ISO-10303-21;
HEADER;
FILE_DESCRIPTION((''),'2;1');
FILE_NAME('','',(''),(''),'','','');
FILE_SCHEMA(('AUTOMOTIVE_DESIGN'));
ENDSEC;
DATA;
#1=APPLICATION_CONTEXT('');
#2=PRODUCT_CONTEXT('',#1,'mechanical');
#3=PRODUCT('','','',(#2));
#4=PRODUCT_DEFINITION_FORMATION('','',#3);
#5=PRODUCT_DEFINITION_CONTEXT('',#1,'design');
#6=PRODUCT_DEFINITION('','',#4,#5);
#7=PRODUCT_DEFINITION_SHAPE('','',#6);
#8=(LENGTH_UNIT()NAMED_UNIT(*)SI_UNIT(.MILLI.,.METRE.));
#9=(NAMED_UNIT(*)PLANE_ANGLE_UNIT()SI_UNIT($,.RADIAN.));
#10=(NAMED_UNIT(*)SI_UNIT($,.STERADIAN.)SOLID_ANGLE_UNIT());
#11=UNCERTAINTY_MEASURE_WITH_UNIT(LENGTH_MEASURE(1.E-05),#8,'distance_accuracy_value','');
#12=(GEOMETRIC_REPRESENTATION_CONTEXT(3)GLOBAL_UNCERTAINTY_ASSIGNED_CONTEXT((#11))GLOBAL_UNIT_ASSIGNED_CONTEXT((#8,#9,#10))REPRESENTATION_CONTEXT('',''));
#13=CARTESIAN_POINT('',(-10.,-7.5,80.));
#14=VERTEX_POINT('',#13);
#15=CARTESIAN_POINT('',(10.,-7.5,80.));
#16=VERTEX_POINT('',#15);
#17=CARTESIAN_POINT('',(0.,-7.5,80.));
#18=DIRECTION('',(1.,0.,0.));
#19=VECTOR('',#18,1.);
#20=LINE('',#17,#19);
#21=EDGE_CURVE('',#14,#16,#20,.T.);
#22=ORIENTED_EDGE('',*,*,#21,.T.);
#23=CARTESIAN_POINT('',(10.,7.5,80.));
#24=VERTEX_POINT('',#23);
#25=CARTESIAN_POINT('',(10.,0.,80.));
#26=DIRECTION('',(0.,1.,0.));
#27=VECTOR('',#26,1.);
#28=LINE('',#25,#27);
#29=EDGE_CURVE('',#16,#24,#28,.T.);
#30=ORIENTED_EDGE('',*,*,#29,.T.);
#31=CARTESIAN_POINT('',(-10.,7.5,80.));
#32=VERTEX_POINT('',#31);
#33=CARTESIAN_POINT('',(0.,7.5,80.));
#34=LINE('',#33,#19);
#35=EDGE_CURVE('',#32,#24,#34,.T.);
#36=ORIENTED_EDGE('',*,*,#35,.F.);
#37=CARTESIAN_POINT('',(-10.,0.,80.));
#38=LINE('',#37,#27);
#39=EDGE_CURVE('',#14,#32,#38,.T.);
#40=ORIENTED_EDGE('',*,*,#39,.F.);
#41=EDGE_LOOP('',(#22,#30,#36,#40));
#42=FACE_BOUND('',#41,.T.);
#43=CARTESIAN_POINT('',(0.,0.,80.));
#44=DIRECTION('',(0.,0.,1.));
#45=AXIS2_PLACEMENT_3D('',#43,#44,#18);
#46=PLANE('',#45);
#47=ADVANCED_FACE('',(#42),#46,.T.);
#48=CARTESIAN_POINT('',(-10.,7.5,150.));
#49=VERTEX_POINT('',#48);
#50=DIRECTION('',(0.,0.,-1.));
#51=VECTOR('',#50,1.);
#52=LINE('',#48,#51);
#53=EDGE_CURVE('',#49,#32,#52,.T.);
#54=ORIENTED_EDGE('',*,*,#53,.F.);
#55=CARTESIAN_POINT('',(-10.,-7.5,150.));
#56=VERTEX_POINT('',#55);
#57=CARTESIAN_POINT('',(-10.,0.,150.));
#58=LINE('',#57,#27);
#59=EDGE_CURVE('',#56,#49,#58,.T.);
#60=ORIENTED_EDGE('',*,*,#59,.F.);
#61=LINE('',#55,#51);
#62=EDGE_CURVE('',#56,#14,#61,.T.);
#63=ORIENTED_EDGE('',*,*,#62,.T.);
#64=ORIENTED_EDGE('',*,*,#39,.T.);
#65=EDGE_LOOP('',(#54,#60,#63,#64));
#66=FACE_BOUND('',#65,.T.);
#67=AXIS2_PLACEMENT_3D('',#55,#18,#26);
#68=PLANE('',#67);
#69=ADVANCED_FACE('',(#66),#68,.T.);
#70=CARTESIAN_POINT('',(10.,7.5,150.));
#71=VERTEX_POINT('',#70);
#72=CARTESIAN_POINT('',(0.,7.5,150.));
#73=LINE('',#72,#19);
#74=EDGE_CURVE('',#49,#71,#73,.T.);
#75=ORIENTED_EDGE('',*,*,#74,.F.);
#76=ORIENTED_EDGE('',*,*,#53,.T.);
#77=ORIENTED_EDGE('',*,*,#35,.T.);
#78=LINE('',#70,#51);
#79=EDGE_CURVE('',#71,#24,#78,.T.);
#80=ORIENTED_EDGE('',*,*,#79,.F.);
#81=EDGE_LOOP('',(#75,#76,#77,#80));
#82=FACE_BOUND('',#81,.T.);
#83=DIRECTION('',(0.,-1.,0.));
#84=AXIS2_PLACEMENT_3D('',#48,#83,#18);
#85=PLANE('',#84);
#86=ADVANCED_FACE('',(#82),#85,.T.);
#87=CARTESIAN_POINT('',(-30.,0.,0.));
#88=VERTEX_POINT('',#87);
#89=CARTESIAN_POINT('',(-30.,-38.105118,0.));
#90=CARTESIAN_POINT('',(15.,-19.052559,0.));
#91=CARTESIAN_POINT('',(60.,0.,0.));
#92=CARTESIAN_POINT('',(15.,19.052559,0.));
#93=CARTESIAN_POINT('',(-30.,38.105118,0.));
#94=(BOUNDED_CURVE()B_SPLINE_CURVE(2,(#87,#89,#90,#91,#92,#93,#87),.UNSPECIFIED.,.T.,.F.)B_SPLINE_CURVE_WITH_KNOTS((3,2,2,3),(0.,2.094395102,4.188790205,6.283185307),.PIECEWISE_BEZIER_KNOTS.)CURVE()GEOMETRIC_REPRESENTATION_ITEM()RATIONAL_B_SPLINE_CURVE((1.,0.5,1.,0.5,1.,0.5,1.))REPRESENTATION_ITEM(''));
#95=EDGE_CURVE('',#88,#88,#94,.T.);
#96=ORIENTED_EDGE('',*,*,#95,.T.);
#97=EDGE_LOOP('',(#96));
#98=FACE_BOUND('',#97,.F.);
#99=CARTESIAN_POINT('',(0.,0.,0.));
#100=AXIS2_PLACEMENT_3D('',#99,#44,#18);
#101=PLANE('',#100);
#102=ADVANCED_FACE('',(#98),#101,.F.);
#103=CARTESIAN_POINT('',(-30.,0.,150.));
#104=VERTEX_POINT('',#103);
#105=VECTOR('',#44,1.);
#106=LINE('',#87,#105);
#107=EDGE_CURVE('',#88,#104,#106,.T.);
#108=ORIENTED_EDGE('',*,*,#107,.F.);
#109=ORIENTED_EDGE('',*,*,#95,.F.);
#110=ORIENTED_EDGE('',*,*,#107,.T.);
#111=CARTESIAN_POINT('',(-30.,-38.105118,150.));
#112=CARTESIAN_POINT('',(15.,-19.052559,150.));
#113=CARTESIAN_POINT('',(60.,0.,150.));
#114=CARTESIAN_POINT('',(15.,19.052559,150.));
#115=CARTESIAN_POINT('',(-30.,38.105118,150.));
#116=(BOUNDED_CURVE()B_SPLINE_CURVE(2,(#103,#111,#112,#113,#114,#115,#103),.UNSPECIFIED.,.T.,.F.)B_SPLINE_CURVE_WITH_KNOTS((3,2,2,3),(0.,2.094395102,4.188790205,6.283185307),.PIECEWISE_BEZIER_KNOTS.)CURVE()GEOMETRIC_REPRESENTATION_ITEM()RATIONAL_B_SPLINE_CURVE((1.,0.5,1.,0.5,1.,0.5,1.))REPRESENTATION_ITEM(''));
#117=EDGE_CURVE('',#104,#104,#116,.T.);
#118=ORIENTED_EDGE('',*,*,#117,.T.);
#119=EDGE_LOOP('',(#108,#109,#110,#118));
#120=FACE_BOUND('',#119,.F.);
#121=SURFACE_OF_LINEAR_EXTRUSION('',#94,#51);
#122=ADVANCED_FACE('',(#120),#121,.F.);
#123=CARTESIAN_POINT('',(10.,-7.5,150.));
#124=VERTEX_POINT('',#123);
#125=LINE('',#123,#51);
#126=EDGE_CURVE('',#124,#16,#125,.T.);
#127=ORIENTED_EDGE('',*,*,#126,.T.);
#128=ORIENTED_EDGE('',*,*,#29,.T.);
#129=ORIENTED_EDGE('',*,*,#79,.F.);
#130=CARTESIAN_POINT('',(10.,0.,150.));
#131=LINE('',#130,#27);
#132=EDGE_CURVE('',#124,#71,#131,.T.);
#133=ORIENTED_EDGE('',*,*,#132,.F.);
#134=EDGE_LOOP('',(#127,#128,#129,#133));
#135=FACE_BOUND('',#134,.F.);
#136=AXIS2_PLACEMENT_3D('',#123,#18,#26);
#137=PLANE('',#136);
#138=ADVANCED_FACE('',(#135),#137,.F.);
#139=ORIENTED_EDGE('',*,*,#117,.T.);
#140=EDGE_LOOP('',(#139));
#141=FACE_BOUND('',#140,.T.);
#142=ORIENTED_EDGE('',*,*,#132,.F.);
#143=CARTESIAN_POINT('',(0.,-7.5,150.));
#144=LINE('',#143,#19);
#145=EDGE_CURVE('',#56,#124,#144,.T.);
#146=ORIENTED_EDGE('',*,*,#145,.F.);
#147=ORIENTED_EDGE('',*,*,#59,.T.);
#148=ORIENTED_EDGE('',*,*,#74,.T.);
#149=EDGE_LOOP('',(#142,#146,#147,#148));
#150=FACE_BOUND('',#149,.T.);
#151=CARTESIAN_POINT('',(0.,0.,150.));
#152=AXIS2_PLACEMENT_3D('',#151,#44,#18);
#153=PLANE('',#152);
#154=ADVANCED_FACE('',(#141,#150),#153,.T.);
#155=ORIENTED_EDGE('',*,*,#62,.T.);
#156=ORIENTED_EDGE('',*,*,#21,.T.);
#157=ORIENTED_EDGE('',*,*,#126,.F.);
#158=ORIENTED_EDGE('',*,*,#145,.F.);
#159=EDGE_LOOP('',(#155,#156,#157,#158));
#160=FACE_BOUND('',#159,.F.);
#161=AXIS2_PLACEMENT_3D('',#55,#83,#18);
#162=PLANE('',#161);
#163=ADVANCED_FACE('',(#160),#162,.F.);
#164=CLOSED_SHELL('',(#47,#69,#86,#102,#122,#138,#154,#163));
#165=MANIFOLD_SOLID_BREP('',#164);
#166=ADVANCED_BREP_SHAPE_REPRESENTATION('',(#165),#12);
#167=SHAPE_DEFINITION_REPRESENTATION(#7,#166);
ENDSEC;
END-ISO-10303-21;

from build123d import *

# Parameters (mm, degrees)
F1_DEPTH = 150
F3_W     = 20
F3_H     = 15
F4_DEPTH = 70


# Not quite as in the source:
# - a feature names something its author has since deleted; it is built from what else it names


with BuildPart() as f1:
    # F0 (on Top) → F1 (new body)
    with BuildSketch(Plane.XY):
        with BuildLine():
            add(Edge.make_bspline(
                [(-30, 0), (-30, -38.1051177665), (15, -19.0525588833), (60, 0), (15, 19.0525588833), (-30, 38.1051177665), (-30, 0)],
                knots=[0, 0, 0, 2.0943951024, 2.0943951024, 4.1887902048, 4.1887902048, 6.2831853072, 6.2831853072, 6.2831853072], degree=2, weights=[1, 0.5, 1, 0.5, 1, 0.5, 1]))
        make_face()
    extrude(amount=F1_DEPTH)

    # F3 (on face) → F4 (cut)
    with BuildSketch(Plane.XY.offset(150)):
        Rectangle(F3_W, F3_H)
    extrude(amount=-F4_DEPTH, mode=Mode.SUBTRACT)


solid = f1.part
